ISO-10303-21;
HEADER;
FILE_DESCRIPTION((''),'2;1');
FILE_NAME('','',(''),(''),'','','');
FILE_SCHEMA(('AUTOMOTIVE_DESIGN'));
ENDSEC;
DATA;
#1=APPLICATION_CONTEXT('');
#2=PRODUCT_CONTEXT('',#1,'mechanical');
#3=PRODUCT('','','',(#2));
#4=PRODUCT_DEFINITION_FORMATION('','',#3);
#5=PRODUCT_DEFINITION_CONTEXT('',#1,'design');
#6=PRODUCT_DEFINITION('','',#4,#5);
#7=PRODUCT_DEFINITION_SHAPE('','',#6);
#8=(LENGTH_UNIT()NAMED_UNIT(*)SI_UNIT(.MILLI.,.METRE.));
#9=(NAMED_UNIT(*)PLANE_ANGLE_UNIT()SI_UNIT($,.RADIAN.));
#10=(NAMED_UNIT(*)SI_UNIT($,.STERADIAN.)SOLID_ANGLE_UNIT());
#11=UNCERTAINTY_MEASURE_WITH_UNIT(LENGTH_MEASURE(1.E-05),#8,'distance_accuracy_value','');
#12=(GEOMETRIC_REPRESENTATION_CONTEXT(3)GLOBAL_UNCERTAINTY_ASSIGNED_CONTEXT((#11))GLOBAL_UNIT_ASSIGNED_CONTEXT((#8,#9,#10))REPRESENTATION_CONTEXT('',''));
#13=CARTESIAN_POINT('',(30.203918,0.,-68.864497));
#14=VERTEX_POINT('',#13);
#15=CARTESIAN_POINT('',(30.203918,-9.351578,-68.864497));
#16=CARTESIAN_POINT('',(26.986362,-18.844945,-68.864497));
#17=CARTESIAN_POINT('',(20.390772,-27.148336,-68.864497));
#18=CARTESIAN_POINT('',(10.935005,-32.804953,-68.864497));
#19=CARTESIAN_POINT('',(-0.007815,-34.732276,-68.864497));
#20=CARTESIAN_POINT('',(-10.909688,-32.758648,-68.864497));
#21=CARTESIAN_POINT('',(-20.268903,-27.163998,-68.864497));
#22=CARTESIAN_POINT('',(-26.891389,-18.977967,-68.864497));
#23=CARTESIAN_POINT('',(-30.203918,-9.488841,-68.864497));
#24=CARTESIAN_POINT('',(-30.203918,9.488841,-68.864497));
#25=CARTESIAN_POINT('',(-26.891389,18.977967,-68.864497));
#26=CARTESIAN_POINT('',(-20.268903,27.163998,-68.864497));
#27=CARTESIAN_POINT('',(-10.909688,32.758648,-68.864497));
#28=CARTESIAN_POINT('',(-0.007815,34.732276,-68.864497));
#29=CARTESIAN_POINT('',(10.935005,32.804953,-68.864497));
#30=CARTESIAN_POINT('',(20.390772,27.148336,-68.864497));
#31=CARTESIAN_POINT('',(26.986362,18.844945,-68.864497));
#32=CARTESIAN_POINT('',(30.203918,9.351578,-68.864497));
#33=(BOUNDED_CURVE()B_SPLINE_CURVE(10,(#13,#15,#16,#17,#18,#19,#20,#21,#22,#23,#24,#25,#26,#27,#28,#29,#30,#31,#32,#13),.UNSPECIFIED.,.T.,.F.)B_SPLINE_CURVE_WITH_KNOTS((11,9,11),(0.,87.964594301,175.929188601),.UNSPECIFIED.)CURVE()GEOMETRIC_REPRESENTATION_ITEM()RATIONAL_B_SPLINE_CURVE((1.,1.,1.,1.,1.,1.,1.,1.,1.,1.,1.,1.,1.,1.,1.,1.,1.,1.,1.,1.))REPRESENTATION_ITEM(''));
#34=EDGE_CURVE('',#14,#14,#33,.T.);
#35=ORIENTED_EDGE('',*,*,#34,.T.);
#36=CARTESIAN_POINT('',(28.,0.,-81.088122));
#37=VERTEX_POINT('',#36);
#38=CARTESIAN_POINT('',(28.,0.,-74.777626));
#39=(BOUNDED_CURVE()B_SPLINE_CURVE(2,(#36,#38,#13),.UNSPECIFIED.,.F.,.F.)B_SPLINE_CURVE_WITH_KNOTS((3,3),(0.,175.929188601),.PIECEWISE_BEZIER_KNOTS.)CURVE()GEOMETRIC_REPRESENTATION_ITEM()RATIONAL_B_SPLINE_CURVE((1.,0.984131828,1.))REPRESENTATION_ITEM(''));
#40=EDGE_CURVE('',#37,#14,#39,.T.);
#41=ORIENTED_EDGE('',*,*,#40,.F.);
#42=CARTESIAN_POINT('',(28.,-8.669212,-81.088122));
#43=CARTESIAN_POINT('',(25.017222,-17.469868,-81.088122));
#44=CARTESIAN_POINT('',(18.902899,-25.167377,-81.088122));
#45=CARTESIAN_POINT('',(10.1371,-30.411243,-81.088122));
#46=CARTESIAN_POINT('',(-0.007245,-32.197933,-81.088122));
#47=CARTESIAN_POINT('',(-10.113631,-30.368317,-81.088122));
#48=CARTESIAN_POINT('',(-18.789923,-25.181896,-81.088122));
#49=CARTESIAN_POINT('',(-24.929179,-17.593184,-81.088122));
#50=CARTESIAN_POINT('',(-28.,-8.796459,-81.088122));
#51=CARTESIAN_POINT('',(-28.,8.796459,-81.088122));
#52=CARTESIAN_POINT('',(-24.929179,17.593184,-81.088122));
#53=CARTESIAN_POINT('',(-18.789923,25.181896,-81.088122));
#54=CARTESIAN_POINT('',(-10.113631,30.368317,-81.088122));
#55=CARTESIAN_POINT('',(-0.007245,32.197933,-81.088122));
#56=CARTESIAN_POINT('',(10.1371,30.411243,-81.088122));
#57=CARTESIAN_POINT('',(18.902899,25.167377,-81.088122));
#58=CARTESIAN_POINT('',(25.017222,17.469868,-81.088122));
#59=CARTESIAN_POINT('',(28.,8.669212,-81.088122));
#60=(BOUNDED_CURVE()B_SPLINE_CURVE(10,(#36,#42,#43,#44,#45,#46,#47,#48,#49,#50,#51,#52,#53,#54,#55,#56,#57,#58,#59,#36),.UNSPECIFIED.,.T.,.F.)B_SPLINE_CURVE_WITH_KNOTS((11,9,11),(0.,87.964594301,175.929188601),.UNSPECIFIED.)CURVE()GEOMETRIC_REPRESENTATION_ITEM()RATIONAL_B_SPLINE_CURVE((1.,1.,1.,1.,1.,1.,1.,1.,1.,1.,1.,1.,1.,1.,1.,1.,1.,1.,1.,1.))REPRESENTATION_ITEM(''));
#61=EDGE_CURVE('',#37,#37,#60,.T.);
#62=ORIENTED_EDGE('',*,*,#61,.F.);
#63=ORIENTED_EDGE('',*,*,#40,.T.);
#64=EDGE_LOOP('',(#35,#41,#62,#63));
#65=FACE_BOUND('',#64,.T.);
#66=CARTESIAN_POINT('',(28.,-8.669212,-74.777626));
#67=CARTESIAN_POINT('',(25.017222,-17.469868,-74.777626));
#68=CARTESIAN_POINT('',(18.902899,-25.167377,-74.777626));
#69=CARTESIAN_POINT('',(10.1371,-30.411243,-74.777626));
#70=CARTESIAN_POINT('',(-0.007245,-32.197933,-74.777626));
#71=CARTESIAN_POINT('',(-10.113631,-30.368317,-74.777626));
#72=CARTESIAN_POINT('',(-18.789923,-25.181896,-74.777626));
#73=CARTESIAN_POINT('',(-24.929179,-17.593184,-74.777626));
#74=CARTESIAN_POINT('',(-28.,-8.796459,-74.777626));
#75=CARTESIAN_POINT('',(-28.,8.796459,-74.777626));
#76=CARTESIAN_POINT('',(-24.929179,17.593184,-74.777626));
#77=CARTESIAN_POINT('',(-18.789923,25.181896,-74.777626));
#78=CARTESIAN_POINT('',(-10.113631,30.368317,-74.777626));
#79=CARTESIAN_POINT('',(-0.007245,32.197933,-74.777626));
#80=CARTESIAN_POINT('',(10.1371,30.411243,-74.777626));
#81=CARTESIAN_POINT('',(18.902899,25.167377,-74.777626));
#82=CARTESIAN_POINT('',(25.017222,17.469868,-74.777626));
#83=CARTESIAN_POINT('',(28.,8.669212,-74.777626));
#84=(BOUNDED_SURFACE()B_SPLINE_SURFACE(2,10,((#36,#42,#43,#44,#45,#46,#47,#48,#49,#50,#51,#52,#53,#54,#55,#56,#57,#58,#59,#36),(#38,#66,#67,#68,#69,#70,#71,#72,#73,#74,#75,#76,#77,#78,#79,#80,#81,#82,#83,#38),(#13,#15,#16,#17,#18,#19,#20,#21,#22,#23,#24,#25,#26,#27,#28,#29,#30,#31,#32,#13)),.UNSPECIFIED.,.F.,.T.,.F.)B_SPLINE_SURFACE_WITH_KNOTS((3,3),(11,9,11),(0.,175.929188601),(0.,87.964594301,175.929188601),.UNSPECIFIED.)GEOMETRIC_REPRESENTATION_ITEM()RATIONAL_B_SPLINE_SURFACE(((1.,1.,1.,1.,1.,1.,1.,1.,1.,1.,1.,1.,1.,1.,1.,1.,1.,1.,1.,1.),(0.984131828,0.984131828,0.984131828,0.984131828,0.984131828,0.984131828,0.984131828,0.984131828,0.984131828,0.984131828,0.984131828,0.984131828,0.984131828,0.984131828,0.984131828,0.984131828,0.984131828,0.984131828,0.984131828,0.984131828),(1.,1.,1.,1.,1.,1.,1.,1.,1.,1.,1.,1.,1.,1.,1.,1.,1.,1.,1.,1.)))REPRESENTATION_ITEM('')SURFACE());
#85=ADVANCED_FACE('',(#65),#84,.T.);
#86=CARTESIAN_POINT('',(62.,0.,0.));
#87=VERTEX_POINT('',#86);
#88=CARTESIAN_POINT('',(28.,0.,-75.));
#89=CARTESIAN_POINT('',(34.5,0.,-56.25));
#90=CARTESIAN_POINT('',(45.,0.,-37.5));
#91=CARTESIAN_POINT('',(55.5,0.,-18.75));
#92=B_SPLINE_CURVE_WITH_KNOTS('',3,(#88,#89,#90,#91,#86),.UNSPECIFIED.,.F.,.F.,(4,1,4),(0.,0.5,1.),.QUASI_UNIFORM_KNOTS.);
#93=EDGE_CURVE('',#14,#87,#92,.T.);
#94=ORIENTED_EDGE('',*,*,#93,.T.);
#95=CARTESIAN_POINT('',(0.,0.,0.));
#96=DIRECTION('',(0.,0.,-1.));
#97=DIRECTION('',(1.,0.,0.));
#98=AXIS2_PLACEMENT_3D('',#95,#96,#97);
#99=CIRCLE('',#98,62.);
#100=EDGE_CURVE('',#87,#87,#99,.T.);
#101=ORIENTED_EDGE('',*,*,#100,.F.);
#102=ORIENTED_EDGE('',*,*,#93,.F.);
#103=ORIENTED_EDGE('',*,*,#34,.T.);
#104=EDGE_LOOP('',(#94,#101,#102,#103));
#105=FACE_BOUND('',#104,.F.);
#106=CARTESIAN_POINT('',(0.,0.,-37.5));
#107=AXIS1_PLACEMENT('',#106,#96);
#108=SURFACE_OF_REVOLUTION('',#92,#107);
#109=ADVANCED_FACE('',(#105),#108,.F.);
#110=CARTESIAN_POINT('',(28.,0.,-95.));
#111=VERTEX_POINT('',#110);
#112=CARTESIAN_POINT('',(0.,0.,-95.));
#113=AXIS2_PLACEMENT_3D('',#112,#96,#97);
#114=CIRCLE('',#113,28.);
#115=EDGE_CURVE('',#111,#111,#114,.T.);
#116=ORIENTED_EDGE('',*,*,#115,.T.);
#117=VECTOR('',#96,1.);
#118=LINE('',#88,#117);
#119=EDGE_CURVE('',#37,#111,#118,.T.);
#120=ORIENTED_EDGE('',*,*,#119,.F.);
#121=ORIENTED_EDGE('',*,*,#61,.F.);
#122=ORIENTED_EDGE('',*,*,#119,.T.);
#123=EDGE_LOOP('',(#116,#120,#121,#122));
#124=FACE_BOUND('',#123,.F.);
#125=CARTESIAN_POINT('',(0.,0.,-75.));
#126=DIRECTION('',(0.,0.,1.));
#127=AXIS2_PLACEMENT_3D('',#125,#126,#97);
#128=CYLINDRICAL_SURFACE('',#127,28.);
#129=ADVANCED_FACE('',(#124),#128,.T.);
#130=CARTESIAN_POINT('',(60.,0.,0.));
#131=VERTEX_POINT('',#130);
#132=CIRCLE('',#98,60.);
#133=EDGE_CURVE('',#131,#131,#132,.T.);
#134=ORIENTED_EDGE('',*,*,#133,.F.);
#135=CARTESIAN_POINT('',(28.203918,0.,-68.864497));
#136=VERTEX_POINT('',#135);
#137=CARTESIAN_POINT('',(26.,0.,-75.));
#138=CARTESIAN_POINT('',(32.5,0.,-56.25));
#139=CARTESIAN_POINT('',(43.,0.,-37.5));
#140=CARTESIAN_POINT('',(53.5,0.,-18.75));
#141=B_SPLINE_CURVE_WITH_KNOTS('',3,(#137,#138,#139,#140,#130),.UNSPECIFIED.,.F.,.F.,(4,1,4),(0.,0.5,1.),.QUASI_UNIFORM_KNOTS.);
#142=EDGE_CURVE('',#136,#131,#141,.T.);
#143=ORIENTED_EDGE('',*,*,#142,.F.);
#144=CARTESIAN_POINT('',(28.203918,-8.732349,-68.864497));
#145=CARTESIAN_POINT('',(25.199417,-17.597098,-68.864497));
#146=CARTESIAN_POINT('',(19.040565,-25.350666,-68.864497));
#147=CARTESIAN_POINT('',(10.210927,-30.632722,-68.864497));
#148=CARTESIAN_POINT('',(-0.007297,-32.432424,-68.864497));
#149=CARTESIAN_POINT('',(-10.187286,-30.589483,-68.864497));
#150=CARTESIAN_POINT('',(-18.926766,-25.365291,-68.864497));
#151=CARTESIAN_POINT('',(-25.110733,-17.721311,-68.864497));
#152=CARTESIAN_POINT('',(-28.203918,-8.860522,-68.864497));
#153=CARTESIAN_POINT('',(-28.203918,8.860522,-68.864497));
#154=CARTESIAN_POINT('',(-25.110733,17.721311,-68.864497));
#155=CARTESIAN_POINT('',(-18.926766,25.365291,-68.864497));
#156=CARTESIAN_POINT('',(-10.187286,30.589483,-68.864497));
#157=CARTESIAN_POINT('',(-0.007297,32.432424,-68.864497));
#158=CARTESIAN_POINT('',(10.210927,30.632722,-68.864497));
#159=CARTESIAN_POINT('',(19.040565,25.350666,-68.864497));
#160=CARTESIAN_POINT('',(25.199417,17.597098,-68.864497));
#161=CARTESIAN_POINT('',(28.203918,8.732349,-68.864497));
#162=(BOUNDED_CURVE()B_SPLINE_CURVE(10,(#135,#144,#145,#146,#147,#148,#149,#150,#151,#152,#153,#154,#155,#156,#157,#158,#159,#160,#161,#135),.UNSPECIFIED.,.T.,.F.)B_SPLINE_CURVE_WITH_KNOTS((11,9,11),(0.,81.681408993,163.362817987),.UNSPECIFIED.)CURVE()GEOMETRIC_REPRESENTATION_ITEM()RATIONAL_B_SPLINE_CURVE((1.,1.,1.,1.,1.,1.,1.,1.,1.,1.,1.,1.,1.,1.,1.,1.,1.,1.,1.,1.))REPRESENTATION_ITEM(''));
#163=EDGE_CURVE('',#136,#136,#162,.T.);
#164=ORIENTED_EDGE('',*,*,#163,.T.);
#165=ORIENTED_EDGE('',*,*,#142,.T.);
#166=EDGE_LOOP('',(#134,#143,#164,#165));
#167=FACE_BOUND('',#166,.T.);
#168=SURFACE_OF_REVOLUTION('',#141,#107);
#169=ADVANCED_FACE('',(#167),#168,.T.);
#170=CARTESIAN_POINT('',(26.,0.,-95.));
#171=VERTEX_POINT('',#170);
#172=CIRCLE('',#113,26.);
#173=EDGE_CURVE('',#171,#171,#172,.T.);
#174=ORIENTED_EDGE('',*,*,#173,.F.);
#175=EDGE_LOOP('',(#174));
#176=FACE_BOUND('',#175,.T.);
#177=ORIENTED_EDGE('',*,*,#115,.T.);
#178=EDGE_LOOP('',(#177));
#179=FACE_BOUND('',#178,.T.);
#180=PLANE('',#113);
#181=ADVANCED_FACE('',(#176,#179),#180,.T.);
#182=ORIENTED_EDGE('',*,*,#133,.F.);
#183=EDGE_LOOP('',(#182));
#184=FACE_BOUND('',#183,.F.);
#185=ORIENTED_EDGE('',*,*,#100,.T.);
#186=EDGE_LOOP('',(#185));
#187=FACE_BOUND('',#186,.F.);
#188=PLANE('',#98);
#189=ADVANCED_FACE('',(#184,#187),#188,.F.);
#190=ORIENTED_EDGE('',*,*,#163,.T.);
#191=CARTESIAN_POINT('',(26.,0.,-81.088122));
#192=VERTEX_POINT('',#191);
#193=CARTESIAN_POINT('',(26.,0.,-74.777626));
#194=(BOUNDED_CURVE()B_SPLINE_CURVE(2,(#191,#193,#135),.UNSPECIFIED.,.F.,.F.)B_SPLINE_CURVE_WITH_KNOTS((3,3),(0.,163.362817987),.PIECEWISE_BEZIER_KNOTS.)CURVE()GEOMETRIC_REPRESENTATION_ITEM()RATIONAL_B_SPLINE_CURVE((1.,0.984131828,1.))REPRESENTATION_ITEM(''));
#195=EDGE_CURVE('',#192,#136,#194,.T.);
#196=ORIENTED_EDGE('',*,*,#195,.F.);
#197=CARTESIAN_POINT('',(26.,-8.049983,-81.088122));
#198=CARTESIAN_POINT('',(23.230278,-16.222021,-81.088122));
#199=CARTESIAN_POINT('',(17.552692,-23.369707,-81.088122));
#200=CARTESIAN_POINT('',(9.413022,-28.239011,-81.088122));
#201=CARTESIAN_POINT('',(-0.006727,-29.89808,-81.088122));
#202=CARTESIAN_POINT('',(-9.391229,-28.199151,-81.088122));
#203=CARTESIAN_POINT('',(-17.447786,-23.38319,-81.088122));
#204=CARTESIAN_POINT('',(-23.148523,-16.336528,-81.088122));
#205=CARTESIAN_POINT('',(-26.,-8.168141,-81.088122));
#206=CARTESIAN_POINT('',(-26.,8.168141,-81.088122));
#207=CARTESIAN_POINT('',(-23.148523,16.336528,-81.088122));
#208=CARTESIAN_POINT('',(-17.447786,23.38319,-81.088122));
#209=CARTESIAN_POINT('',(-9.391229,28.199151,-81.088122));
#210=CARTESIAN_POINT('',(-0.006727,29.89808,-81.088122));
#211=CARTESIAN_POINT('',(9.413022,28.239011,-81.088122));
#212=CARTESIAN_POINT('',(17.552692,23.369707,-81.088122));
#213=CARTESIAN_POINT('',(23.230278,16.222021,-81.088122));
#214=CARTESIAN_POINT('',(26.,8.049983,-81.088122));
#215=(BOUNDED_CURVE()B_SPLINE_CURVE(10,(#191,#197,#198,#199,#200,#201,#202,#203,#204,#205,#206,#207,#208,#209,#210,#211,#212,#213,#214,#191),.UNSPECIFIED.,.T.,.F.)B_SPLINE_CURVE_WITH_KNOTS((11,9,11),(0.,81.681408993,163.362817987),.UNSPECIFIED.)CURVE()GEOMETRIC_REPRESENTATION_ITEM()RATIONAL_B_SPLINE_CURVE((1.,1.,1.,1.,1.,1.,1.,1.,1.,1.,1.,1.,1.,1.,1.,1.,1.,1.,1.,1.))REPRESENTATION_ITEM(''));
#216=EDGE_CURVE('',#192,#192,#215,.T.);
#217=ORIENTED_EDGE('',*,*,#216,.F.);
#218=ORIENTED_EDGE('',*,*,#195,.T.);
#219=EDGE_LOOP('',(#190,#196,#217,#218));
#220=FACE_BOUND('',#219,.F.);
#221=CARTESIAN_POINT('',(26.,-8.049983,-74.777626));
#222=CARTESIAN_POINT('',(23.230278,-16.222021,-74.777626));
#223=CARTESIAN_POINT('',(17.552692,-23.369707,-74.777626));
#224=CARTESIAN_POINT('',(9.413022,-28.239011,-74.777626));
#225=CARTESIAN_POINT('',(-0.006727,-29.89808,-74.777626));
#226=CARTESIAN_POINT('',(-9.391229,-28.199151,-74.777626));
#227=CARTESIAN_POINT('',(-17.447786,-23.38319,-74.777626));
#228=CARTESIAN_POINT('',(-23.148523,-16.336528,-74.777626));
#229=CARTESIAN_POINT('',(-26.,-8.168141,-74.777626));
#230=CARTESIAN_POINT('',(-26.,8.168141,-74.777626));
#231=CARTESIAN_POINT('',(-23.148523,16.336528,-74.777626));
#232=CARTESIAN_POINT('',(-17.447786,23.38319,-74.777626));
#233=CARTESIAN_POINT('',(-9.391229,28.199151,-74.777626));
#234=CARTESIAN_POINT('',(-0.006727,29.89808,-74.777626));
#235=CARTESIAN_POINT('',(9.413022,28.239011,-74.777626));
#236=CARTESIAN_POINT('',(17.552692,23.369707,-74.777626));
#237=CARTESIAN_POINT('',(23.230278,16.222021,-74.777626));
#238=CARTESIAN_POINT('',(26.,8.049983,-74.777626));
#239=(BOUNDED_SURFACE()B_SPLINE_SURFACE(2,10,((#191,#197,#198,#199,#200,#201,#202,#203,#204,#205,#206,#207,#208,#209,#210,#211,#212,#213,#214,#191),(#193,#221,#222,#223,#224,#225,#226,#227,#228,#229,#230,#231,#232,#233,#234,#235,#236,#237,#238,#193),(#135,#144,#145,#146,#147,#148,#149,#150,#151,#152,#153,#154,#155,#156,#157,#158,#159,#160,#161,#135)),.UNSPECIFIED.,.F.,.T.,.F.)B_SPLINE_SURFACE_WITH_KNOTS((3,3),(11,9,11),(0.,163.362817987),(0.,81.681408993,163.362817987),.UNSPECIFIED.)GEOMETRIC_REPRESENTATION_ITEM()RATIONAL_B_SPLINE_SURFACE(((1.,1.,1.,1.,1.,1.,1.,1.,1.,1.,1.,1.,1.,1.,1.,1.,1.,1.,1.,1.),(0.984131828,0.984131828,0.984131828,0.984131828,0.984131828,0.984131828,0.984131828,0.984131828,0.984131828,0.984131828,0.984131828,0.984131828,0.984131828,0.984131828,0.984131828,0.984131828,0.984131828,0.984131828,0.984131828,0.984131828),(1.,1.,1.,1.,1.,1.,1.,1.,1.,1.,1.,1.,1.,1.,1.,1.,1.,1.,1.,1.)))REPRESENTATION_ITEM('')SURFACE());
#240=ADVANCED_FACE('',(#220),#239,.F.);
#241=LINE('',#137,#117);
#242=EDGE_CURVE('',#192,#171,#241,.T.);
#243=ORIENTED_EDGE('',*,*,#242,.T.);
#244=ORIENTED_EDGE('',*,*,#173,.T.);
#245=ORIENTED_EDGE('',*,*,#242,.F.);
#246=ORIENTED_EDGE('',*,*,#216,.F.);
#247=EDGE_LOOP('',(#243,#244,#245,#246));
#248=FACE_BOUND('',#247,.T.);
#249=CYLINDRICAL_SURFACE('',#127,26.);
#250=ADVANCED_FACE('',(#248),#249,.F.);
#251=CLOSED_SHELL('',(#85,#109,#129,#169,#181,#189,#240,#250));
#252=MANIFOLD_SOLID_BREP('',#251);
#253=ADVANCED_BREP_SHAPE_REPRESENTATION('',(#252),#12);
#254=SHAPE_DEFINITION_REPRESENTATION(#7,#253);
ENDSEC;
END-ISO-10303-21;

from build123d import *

# Parameters (mm, degrees)
F2_R     = 28
F2_R_2   = 26
F3_DEPTH = 20
F4_R     = 35


# Not quite as in the source:
# - a feature names something its author has since deleted; it is built from what else it names


with BuildPart() as f1:
    # F0 (on Front) → F1 (revolve)
    with BuildSketch(Plane.XZ):
        with BuildLine():
            add(Edge.make_bspline(
                [(26, -75), (32.5, -56.25), (43, -37.5), (53.5, -18.75), (60, 0)],
                knots=[0, 0, 0, 0, 0.5, 1, 1, 1, 1], degree=3))
            Line((26, -75), (28, -75))
            add(Edge.make_bspline(
                [(28, -75), (34.5, -56.25), (45, -37.5), (55.5, -18.75), (62, 0)],
                knots=[0, 0, 0, 0, 0.5, 1, 1, 1, 1], degree=3))
            Line((62, 0), (60, 0))
        make_face()
    revolve(axis=Axis((0, 0, -37.5), (0, 0, -1)))

    # F2 (on face) → F3 (join)
    with BuildSketch(Plane(origin=(0, 0, -75), x_dir=(1, 0, 0), z_dir=(0, 0, -1))):
        Circle(F2_R)
        Circle(F2_R_2, mode=Mode.SUBTRACT)
    extrude(amount=F3_DEPTH)

    # F4
    f4_edges = [f1.edges().sort_by_distance(p)[0] for p in [
        (-26, 0, -75),
        (-28, 0, -75),
    ]]
    fillet(f4_edges, radius=F4_R)


solid = f1.part
